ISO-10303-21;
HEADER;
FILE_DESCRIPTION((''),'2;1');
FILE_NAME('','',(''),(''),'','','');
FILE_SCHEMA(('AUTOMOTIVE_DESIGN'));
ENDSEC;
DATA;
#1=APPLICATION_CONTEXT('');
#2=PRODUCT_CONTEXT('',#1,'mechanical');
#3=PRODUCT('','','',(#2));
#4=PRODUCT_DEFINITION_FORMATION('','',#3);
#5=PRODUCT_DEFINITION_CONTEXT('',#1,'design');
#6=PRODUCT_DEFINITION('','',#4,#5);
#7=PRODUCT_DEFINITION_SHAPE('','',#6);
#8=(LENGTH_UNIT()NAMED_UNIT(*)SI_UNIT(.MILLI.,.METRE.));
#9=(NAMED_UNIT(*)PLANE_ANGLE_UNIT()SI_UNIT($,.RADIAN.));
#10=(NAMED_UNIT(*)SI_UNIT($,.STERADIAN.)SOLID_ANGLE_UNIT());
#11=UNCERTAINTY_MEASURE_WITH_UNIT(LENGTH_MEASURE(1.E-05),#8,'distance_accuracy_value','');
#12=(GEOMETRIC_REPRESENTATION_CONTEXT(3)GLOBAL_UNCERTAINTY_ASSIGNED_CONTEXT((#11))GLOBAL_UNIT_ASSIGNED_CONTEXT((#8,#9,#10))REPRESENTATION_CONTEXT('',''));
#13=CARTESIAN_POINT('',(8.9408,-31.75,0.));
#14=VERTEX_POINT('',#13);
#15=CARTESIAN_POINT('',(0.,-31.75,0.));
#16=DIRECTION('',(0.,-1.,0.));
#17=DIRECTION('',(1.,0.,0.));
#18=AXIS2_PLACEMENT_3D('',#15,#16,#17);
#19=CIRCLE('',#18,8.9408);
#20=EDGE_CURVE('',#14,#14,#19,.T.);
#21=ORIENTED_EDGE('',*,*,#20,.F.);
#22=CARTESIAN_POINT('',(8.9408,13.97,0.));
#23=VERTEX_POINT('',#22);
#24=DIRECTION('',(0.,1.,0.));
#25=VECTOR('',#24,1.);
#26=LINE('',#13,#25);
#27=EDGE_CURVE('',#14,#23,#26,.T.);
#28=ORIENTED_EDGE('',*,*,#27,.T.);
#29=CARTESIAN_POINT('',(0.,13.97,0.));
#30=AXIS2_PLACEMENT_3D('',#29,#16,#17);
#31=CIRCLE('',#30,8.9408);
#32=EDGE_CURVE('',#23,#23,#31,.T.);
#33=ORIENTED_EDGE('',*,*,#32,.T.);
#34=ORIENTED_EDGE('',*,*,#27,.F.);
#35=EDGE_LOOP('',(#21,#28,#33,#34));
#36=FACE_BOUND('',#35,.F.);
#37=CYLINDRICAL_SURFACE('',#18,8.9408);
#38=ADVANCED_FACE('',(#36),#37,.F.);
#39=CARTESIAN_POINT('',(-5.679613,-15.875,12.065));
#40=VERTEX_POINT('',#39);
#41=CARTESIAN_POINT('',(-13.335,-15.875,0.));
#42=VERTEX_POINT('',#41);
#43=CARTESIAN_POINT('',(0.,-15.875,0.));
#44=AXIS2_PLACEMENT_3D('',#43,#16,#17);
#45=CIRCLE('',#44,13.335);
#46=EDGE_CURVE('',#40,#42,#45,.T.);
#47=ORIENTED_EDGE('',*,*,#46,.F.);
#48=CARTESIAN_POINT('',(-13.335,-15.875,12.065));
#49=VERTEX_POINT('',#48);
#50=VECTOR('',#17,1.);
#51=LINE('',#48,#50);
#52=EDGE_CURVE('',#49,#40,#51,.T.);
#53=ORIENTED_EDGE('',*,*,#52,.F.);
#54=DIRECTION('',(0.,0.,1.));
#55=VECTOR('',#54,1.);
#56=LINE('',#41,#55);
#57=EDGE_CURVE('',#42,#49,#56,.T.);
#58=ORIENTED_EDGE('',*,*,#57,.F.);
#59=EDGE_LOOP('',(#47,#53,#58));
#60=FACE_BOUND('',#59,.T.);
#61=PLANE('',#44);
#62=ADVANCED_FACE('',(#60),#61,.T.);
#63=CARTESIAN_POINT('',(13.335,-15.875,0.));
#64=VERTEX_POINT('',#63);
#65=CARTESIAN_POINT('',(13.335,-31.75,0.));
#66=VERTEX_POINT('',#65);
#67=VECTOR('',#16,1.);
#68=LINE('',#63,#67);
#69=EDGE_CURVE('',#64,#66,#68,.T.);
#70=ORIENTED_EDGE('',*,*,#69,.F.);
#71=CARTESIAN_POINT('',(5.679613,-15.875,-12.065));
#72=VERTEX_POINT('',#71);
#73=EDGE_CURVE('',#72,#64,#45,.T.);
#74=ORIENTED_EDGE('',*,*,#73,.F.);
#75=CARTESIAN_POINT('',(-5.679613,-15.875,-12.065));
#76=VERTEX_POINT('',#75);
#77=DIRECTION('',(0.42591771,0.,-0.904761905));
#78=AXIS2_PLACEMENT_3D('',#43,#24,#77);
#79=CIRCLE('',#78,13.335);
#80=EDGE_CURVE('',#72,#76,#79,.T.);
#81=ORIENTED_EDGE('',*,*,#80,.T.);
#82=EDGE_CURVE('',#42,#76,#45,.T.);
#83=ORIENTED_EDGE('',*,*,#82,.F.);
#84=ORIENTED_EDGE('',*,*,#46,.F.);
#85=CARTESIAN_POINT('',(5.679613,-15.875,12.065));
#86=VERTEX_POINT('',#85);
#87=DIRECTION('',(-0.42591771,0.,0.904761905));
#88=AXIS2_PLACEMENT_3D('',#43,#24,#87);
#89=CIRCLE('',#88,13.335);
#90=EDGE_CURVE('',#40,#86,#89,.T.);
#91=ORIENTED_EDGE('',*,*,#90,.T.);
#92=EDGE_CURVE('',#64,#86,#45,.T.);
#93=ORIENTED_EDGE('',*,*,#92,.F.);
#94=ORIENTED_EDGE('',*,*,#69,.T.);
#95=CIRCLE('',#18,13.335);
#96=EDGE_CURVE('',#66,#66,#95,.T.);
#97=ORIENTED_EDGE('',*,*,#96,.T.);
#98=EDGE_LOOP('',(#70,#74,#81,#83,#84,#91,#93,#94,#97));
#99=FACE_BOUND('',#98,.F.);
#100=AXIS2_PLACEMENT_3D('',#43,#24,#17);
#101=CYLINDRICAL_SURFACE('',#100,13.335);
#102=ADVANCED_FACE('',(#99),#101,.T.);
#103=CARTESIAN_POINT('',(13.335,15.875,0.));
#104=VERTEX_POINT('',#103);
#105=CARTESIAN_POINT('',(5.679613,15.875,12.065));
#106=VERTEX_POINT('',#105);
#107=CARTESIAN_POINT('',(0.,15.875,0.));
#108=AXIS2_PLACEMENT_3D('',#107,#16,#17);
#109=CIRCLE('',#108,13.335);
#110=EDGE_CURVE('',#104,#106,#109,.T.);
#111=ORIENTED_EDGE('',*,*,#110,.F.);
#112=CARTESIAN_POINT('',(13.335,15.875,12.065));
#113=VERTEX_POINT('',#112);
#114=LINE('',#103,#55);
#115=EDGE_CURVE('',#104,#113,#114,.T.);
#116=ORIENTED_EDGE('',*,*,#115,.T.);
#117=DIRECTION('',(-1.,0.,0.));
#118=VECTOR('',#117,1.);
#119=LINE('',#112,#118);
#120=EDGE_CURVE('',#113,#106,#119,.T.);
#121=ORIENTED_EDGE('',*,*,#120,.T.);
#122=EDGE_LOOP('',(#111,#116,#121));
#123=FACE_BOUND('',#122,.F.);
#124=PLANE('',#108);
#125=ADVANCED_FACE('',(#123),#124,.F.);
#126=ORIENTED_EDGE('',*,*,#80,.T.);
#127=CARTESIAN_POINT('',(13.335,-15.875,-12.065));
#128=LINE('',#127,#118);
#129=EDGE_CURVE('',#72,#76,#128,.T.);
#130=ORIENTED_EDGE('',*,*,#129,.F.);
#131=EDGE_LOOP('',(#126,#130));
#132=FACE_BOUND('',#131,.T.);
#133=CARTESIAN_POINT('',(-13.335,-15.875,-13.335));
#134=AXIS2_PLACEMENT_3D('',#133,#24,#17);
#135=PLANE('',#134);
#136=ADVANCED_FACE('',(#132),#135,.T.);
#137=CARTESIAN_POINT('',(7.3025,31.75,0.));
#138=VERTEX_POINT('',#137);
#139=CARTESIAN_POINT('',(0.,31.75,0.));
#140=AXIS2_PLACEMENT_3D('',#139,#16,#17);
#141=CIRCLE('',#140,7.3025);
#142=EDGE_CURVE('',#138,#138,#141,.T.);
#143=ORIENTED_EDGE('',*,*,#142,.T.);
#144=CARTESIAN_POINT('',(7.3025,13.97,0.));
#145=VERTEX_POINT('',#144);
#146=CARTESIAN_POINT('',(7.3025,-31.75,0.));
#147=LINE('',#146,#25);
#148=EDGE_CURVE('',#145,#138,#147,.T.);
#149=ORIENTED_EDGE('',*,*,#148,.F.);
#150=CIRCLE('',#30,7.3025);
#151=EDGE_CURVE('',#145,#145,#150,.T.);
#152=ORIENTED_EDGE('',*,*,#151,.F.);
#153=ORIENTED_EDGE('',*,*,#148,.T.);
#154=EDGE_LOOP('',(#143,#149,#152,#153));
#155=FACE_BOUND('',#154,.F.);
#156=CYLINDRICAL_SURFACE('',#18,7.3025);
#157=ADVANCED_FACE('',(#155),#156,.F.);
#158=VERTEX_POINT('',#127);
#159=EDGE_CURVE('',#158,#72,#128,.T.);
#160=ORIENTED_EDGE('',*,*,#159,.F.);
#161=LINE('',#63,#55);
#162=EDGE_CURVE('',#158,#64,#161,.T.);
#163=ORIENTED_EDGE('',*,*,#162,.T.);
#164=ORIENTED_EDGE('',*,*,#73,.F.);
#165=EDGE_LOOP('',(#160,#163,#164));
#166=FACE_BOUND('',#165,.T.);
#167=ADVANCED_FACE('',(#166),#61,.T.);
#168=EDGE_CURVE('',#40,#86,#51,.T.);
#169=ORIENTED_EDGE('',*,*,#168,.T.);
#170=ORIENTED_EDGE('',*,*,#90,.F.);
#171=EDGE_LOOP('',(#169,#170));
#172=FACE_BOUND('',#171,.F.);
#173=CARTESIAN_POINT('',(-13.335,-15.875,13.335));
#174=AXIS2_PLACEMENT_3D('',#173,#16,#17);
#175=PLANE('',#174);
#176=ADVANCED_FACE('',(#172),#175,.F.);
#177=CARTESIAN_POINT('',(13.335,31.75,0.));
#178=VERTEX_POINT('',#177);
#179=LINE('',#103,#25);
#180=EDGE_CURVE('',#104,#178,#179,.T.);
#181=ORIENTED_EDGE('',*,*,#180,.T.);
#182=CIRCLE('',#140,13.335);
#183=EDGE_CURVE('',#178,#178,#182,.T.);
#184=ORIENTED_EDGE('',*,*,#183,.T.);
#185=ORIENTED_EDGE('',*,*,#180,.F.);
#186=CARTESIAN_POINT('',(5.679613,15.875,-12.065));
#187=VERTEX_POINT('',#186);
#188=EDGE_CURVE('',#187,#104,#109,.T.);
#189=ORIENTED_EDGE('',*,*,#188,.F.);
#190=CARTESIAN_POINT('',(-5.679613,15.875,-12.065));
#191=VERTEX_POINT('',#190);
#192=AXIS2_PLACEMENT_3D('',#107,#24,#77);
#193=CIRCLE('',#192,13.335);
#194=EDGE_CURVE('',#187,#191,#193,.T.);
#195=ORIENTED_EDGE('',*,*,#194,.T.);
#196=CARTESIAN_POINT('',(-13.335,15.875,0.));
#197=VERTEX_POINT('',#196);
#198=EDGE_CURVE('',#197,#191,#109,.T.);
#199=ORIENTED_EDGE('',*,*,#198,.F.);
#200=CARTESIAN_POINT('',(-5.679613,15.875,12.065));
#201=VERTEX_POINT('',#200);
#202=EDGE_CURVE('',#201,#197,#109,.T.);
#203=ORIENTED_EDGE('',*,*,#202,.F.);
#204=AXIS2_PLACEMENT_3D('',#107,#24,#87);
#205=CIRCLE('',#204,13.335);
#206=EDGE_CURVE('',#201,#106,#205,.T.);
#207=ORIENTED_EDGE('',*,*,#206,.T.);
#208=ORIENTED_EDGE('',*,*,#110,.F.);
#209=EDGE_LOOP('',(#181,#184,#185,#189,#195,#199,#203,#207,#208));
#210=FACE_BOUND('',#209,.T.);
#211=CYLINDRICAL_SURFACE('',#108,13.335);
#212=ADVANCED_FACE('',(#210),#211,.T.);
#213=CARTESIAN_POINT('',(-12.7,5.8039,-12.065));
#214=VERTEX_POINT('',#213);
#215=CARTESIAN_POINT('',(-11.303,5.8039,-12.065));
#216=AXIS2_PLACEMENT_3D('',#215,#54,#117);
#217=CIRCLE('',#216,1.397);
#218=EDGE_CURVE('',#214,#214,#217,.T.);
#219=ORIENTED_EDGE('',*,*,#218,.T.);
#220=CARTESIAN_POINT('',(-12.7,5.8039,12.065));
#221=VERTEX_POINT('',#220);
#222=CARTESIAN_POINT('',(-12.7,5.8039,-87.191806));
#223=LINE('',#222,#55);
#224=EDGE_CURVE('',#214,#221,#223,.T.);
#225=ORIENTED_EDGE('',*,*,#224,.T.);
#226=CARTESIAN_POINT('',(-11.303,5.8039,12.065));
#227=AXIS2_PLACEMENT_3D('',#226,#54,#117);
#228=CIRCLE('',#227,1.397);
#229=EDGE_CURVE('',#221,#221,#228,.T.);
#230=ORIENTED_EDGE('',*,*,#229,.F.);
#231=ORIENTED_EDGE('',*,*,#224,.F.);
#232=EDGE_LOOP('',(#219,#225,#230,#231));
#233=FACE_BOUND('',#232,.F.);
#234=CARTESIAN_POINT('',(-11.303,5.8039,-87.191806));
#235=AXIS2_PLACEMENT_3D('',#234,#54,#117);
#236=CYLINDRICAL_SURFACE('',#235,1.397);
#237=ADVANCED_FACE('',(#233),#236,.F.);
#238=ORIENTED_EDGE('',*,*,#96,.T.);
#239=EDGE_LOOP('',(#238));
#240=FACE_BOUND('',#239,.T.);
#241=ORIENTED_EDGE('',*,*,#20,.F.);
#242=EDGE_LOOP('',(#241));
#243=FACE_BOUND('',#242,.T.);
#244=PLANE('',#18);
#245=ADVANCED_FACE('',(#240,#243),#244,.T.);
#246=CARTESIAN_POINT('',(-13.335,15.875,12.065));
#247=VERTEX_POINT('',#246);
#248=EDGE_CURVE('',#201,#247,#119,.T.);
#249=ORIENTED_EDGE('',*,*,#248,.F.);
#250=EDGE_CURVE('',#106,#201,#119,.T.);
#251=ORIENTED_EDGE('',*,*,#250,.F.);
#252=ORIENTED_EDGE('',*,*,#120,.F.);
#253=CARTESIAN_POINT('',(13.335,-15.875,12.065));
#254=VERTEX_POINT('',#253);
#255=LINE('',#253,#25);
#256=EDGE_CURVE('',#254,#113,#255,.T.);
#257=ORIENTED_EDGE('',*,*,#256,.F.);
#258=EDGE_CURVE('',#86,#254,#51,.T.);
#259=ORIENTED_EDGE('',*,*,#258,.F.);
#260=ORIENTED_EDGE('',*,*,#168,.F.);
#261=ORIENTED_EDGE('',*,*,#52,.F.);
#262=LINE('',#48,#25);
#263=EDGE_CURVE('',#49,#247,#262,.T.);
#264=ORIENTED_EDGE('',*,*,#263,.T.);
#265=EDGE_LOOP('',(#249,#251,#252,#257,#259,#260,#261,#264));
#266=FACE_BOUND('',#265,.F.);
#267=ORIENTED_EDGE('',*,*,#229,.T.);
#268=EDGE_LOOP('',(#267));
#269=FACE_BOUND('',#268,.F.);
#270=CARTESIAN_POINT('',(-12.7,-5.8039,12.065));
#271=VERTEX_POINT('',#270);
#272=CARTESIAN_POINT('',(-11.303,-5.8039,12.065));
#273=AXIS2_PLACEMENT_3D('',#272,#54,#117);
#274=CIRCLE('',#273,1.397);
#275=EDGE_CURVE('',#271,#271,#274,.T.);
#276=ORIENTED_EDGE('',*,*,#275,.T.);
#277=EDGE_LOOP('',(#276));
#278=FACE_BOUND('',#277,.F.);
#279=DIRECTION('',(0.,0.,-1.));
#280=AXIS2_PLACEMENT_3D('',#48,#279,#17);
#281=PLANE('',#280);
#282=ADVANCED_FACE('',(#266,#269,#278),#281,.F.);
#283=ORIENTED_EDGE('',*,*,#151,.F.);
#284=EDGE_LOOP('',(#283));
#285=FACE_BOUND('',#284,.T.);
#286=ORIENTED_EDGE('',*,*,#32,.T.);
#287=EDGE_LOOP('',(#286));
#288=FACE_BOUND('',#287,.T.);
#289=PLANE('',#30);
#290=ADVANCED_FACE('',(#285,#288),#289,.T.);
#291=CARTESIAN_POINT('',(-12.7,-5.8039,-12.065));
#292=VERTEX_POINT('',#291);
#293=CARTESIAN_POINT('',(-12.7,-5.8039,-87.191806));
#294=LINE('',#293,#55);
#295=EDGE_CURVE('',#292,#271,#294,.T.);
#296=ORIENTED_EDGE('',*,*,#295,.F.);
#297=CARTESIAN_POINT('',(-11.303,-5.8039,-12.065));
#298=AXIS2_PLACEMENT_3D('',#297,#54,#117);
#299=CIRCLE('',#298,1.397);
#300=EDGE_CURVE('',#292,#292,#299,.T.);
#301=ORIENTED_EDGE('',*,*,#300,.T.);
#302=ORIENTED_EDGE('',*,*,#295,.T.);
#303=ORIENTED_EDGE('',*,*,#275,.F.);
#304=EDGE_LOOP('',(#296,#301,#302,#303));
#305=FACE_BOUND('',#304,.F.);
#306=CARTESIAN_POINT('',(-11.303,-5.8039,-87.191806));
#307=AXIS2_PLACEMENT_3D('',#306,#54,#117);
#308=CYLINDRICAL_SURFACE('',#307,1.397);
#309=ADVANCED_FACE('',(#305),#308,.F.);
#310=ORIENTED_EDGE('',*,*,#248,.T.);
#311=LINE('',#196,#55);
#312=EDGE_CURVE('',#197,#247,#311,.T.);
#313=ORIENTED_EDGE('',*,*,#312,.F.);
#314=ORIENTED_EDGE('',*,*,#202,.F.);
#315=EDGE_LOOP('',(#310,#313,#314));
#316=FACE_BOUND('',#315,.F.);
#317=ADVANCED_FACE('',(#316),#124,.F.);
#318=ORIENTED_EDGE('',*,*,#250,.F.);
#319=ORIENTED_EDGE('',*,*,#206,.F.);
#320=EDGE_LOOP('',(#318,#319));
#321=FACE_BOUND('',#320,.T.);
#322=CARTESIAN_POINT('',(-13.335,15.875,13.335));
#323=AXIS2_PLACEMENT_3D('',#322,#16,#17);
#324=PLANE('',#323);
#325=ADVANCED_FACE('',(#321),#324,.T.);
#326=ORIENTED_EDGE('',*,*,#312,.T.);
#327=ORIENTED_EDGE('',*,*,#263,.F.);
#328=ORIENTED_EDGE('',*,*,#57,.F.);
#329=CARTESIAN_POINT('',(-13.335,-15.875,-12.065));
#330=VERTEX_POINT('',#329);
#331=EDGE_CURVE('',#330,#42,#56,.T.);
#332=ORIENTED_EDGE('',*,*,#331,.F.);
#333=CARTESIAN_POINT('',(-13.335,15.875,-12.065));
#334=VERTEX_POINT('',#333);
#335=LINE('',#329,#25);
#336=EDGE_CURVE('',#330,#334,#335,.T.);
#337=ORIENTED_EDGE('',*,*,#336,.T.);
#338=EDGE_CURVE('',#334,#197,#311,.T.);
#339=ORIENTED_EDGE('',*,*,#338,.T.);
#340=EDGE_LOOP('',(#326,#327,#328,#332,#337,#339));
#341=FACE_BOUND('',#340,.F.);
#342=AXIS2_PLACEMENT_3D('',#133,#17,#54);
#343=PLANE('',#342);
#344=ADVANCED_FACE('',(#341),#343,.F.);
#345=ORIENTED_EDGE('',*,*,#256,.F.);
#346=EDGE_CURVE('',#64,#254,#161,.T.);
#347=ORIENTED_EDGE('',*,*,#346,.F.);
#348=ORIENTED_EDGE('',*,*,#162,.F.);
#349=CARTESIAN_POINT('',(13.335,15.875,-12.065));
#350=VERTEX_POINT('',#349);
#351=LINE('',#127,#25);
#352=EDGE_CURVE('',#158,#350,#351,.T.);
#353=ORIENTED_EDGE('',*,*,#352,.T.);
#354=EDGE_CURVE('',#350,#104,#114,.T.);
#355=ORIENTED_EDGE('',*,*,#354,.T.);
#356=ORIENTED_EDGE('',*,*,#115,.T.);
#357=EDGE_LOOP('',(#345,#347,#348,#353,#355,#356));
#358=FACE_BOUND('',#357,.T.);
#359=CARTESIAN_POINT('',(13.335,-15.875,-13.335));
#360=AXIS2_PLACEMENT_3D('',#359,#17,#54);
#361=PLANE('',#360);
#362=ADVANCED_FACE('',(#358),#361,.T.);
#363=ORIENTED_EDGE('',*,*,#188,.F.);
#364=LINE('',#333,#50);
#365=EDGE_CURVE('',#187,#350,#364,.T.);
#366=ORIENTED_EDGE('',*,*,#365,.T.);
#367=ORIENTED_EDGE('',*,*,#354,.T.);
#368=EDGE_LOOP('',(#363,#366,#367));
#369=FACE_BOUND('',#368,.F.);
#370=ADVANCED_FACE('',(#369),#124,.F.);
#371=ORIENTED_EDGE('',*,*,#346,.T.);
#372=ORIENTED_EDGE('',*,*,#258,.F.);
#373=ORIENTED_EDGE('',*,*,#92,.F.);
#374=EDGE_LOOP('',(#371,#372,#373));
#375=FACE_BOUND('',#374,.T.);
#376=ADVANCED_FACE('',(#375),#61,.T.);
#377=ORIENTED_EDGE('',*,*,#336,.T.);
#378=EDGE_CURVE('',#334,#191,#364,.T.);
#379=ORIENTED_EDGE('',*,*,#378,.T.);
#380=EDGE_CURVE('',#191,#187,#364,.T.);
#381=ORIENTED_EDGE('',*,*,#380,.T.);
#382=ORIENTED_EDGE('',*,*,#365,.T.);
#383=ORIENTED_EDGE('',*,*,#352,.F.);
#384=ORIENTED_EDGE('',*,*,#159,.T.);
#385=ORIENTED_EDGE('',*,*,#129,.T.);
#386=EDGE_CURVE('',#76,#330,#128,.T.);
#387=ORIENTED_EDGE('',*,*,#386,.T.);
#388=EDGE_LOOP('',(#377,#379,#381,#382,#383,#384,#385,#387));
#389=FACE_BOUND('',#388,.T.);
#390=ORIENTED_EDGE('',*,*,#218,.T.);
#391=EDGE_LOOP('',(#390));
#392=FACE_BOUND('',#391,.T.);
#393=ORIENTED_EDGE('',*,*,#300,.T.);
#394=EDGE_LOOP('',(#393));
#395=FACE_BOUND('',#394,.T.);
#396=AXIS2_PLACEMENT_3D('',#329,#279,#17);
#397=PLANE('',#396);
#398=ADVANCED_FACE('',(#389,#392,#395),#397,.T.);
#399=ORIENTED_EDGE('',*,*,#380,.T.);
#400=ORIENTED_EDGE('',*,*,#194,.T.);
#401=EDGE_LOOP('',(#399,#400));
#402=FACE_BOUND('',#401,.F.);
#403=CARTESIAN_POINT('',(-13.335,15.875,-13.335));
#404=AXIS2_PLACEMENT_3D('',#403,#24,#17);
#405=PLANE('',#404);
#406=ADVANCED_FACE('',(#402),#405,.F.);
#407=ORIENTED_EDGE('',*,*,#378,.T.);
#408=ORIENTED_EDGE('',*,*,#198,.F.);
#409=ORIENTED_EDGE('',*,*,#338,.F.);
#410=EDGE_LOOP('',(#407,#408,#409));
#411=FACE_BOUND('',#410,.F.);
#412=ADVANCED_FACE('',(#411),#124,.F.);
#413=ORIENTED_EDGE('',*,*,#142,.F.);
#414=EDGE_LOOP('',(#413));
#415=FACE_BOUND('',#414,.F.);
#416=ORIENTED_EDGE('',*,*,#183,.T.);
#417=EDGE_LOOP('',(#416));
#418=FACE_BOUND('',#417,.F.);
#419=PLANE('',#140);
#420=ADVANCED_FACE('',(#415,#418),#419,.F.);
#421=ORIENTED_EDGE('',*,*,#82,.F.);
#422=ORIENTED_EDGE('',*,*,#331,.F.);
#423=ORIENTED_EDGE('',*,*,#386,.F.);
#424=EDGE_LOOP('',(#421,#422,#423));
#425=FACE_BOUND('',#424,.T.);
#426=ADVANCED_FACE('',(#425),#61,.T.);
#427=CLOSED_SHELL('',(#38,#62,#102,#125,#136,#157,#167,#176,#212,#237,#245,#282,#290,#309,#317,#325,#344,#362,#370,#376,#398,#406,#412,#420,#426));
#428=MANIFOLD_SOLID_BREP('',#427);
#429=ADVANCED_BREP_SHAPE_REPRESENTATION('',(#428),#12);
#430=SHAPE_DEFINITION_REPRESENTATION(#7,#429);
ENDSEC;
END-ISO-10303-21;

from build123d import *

# Parameters (mm, degrees)
F5_W      = 26.67
F5_H      = 26.67
F6_DEPTH  = 31.75
F7_R      = 13.335
F9_DEPTH  = 15.875
F8_R      = 13.335
F10_DEPTH = 15.875
F12_R     = 7.3025
F14_DEPTH = 63.5
F11_R     = 8.9408
F15_DEPTH = 45.72
F13_R     = 7.3025
F16_DEPTH = 63.5
F18_D     = 2.794
F19_D     = 2.794
F20_DEPTH = 1.27
F21_DEPTH = 1.27


with BuildPart() as f6:
    # F5 (on offset) → F6 (new body)
    with BuildSketch(Plane.XZ.offset(15.875)):
        Rectangle(F5_W, F5_H)
    extrude(amount=-F6_DEPTH)

    # F7 (on offset) → F9 (join)
    with BuildSketch(Plane.XZ.offset(15.875)):
        Circle(F7_R)
    extrude(amount=F9_DEPTH)

    # F8 (on offset) → F10 (join)
    with BuildSketch(Plane.XZ.offset(-15.875)):
        Circle(F8_R)
    extrude(amount=-F10_DEPTH)

    # F12 (on offset) → F14 (cut)
    with BuildSketch(Plane.XZ.offset(31.75)):
        Circle(F12_R)
    extrude(amount=-F14_DEPTH, mode=Mode.SUBTRACT)

    # F11 (on offset) → F15 (cut)
    with BuildSketch(Plane.XZ.offset(31.75)):
        Circle(F11_R)
    extrude(amount=-F15_DEPTH, mode=Mode.SUBTRACT)

    # F13 (on offset) → F16 (cut)
    with BuildSketch(Plane.XZ.offset(-31.75)):
        Circle(F13_R)
    extrude(amount=F16_DEPTH, mode=Mode.SUBTRACT)

    # F18 (through all)
    with Locations(Plane(origin=(0, 0, -13.335), x_dir=(1, 0, 0), z_dir=(0, 0, -1))):
        with Locations((-11.303, -5.8039)):
            Hole(F18_D / 2)

    # F19 (through all)
    with Locations(Plane(origin=(0, 0, -13.335), x_dir=(1, 0, 0), z_dir=(0, 0, -1))):
        with Locations((-11.303, 5.8039)):
            Hole(F19_D / 2)

    # F20 (cut): a face of the model
    f20_faces = [f6.faces().sort_by_distance(p)[0] for p in [
        (0.166086667, 0, 13.335),
    ]]
    extrude(f20_faces, amount=-F20_DEPTH, mode=Mode.SUBTRACT)

    # F21 (cut): a face of the model
    f21_faces = [f6.faces().sort_by_distance(p)[0] for p in [
        (0.166086667, 0, -13.335),
    ]]
    extrude(f21_faces, amount=-F21_DEPTH, mode=Mode.SUBTRACT)


solid = f6.part
